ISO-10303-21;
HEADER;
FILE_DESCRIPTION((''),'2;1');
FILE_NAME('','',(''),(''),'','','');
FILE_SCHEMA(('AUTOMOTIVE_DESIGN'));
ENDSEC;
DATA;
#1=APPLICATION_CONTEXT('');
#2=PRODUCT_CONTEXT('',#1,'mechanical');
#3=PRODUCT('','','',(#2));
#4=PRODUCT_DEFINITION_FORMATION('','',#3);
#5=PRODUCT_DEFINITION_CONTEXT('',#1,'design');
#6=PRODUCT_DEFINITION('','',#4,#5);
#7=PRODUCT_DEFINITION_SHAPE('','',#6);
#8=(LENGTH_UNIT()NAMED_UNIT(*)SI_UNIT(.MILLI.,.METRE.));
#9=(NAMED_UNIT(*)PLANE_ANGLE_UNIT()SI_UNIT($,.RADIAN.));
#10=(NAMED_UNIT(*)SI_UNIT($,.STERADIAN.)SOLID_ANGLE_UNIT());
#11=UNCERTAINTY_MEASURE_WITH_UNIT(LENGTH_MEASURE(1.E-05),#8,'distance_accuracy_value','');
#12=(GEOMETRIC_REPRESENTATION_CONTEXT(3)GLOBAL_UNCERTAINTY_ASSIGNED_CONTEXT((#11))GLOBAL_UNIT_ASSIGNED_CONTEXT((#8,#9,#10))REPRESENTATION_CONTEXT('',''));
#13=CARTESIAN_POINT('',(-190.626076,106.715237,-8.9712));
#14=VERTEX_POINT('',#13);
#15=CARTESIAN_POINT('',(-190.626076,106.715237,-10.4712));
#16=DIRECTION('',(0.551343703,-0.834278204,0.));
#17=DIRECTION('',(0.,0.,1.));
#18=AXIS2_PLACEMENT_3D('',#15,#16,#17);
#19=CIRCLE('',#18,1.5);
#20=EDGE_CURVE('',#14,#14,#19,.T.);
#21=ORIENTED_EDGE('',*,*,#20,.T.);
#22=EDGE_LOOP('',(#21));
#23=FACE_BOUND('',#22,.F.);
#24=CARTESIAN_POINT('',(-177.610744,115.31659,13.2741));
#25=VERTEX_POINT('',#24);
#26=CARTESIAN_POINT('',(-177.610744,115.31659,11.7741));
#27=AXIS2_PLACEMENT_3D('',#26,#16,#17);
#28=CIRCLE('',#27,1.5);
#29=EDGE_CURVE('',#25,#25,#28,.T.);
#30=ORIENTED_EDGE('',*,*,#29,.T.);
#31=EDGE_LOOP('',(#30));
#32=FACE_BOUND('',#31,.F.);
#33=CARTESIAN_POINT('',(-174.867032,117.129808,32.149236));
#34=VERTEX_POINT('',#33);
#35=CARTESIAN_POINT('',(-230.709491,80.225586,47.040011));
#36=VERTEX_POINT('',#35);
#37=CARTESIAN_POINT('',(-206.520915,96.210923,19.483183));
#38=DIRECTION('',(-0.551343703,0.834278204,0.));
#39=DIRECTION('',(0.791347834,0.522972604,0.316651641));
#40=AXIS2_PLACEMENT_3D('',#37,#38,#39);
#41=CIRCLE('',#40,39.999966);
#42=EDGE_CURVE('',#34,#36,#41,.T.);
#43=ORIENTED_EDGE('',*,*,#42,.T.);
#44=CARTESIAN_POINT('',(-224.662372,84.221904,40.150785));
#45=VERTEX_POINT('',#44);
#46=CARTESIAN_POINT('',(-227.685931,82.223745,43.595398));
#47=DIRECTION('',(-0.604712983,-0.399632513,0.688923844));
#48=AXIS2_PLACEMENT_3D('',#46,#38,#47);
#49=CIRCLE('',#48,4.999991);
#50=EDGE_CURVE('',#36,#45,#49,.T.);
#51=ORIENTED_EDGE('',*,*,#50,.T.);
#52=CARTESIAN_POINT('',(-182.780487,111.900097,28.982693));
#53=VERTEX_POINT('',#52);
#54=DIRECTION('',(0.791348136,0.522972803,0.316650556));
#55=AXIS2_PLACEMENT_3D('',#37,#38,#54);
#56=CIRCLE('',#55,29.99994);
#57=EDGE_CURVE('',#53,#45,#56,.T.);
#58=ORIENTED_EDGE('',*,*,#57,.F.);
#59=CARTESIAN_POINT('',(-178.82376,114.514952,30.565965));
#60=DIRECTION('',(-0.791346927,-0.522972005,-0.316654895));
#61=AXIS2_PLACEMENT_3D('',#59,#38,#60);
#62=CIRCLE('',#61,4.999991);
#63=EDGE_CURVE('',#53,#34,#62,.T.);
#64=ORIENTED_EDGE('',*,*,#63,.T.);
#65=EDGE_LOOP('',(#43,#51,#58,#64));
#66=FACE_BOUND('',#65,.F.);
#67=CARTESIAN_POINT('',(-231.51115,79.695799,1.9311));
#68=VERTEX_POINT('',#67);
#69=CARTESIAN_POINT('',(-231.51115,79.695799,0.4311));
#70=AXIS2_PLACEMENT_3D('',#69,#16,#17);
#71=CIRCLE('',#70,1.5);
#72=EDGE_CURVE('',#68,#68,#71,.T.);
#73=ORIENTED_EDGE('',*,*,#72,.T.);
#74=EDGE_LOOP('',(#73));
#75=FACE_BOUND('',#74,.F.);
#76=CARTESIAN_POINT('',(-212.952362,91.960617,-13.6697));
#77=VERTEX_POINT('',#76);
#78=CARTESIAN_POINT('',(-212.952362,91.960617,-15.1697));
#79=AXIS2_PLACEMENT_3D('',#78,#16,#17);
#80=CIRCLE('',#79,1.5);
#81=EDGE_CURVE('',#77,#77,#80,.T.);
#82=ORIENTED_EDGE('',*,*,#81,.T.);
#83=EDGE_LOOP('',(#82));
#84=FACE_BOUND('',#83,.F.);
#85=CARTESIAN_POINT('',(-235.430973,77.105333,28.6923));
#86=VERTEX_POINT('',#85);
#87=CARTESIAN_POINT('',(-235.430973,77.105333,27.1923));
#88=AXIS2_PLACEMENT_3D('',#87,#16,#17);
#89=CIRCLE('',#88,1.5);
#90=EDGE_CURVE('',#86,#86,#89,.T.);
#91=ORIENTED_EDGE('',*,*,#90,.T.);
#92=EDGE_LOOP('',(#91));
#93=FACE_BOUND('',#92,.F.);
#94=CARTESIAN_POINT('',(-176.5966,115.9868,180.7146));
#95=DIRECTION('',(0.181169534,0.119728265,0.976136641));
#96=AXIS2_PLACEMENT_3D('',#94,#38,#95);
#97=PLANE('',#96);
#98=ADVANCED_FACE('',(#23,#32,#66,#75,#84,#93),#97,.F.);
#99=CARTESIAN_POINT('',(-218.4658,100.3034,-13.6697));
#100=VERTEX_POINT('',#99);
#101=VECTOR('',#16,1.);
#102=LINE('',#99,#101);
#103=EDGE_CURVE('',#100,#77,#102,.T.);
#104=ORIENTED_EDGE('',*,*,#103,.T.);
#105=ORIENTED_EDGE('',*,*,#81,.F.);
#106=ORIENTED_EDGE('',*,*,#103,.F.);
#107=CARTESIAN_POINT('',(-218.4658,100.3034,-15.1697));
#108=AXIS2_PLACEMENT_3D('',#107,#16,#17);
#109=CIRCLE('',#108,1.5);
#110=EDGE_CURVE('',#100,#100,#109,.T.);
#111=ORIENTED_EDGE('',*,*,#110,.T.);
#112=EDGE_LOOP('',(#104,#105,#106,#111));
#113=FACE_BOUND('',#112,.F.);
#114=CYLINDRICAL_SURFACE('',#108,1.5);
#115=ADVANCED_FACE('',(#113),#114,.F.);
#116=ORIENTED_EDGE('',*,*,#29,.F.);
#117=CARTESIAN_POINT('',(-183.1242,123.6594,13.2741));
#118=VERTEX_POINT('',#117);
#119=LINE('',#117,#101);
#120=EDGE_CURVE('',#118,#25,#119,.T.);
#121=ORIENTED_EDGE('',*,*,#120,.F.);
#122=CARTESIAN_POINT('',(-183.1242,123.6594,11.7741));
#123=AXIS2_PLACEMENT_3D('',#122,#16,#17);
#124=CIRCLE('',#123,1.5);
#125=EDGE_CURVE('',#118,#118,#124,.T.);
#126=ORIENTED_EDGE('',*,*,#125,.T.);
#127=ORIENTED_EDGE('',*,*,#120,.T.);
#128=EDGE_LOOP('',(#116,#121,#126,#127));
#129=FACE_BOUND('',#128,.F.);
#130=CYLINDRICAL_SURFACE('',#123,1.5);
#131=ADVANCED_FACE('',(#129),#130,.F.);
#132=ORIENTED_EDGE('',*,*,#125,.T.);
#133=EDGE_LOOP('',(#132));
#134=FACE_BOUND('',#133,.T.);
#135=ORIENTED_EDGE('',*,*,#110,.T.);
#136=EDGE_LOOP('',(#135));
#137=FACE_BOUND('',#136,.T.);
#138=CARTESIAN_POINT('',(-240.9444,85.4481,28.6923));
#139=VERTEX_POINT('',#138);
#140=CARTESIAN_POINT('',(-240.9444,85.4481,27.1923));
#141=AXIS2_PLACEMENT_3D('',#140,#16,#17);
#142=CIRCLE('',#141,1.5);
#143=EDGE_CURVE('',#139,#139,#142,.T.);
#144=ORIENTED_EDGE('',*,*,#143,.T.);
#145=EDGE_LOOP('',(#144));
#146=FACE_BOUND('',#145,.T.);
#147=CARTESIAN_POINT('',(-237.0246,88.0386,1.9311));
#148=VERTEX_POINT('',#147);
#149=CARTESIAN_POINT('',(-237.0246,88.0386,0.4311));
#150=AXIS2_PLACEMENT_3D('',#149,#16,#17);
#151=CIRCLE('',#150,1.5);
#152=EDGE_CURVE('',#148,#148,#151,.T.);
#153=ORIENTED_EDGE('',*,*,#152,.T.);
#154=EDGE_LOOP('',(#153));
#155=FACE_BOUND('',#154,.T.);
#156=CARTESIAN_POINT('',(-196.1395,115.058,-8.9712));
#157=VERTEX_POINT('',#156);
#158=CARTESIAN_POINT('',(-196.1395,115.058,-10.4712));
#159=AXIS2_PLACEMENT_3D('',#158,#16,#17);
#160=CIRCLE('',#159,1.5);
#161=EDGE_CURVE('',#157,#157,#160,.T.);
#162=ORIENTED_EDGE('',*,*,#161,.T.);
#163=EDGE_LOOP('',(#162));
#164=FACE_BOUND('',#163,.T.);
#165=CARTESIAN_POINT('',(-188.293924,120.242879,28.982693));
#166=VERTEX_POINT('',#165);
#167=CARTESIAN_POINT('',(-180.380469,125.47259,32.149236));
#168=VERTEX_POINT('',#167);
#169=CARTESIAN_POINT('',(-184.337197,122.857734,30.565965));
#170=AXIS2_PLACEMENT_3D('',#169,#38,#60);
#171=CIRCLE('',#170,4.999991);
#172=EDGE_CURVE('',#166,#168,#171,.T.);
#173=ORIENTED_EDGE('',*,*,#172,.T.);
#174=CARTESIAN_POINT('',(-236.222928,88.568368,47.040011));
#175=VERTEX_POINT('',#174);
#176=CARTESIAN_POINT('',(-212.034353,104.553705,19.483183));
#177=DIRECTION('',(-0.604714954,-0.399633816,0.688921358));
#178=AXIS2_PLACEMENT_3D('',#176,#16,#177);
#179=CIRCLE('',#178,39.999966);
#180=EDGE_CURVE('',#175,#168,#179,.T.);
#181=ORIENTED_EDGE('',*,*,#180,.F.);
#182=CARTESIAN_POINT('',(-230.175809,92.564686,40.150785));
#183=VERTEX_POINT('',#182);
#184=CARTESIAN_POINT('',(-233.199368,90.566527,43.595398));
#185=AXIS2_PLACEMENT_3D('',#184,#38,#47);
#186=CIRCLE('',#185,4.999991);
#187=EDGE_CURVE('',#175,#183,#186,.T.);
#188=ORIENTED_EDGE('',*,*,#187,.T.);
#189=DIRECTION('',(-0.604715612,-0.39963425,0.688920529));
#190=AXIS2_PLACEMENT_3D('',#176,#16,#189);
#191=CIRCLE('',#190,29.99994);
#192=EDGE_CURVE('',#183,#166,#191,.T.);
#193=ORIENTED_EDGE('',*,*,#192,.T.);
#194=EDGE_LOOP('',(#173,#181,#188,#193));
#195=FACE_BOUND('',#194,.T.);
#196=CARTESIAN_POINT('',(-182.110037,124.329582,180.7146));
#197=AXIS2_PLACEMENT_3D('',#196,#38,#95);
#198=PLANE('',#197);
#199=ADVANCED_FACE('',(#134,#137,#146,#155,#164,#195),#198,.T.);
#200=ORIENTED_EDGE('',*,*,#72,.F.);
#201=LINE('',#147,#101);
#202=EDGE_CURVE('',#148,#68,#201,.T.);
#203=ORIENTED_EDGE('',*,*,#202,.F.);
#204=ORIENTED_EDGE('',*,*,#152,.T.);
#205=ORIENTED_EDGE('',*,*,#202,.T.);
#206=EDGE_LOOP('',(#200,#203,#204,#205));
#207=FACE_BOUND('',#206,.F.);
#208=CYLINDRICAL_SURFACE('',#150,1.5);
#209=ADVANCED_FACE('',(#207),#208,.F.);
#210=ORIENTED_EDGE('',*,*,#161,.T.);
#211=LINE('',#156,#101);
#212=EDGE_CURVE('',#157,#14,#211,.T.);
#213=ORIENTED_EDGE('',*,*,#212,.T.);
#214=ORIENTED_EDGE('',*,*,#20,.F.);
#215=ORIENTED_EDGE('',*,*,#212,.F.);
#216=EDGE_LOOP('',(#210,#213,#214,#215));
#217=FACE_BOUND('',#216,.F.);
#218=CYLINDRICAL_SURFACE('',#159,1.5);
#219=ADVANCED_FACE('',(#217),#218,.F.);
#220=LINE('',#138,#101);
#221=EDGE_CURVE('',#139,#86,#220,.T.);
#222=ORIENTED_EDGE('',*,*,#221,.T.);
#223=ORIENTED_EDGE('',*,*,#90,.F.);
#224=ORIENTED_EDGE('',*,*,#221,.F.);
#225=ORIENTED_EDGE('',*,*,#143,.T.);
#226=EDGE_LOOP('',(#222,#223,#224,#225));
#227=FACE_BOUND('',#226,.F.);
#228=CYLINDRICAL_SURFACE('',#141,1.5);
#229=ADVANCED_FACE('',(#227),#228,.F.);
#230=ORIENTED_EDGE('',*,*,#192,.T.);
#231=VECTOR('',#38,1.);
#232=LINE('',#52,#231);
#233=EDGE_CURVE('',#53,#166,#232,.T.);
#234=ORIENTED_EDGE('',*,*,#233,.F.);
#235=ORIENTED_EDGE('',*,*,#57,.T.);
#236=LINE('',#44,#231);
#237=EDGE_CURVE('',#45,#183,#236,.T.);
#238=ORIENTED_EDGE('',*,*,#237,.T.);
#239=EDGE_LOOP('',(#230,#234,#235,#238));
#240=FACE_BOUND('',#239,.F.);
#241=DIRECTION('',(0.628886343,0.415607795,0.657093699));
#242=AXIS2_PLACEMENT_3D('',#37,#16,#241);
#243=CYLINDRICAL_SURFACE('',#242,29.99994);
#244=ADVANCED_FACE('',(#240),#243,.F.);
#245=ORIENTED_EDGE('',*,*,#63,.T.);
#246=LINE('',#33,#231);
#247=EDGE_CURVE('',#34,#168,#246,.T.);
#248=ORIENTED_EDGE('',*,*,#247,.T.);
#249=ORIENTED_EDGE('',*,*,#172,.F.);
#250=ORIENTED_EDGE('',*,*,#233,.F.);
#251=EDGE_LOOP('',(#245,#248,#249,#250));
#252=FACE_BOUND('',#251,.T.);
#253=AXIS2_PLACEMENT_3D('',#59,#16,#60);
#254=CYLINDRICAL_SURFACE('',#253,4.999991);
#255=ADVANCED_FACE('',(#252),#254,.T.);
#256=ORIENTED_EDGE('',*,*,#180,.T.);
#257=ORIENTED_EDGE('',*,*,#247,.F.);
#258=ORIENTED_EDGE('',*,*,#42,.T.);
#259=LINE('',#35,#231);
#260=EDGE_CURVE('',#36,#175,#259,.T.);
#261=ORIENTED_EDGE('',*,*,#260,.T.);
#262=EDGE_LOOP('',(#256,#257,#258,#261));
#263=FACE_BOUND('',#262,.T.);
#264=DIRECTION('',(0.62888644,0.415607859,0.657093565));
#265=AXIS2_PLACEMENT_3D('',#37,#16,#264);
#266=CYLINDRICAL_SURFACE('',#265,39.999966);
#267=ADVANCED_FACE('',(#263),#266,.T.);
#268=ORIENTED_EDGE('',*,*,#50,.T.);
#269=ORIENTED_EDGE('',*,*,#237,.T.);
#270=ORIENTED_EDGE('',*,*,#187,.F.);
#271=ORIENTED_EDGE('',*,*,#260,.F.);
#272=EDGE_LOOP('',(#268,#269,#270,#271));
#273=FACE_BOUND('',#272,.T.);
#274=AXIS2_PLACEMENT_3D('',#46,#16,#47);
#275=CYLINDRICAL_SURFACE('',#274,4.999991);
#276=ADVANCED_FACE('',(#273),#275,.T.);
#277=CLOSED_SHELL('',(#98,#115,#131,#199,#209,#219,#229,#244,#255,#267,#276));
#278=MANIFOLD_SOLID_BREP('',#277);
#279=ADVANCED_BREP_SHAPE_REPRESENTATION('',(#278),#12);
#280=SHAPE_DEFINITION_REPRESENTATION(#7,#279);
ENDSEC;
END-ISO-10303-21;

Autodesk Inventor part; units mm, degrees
ref_plane "Work Plane1" through (-147.3677, -4.0754, 130.4495) normal (-0.5513437, 0.8342782, 0) x (0, 0, 1)
ref_plane "Work Plane2" through (-176.5966, 115.9868, 180.7146) normal (-0.5513437, 0.8342782, 0) x (0.1811695, 0.1197283, 0.9761366)
sketch "Sketch2" plane through (-176.5966, 115.9868, 180.7146) normal (-0.5513437, 0.8342782, 0) x (0.1811695, 0.1197283, 0.9761366)
  arc A0 (82.4936, -40) -> (107.4936, -33.3012) centre (82.4936, 10) ccw projected
  line L0 (107.4936, -33.3012) -> (126.4432, -22.3607) projected
  arc A1 (132.9687, -23.7251) -> (126.4432, -22.3607) centre (128.9432, -26.6908) ccw projected
  arc A2 (132.9687, -23.7251) -> (132.9687, 23.7251) centre (165.173, 0) ccw projected
  arc A3 (126.4432, 22.3607) -> (132.9687, 23.7251) centre (128.9432, 26.6908) ccw projected
  line L1 (126.4432, 22.3607) -> (107.4936, 33.3012) projected
  arc A4 (107.4936, 33.3012) -> (82.4936, 40) centre (82.4936, -10) ccw projected
  line L2 (-82.4936, 40) -> (82.4936, 40) projected
  arc A5 (-82.4936, 40) -> (-107.4936, 33.3012) centre (-82.4936, -10) ccw projected
  line L3 (-107.4936, 33.3012) -> (-126.4432, 22.3607) projected
  arc A6 (-132.9687, 23.7251) -> (-126.4432, 22.3607) centre (-128.9432, 26.6908) ccw projected
  arc A7 (-132.9687, 23.7251) -> (-132.9687, -23.7251) centre (-165.173, 0) ccw projected
  arc A8 (-126.4432, -22.3607) -> (-132.9687, -23.7251) centre (-128.9432, -26.6908) ccw projected
  line L4 (-126.4432, -22.3607) -> (-107.4936, -33.3012) projected
  arc A9 (-107.4936, -33.3012) -> (-82.4936, -40) centre (-82.4936, 10) ccw projected
  line L5 (82.4936, -40) -> (-82.4936, -40) projected
  arc A10 (3.6764, 4.0958) -> (3.6764, -4.0958) centre (6.5442, 0) ccw projected
  line L6 (3.6764, -4.0958) -> (20.5406, -15.9042) projected
  arc A11 (17.6727, -25) -> (20.5406, -15.9042) centre (17.6727, -20) ccw projected
  line L7 (17.6727, -25) -> (-19.8928, -25) projected
  arc A12 (-22.7607, -24.0958) -> (-19.8928, -25) centre (-19.8928, -20) ccw projected
  line L8 (-22.7607, -24.0958) -> (-51.3236, -4.0958) projected
  arc A13 (-51.3236, 4.0958) -> (-51.3236, -4.0958) centre (-48.4558, 0) ccw projected
  line L9 (-51.3236, 4.0958) -> (-22.7607, 24.0958) projected
  arc A14 (-19.8928, 25) -> (-22.7607, 24.0958) centre (-19.8928, 20) ccw projected
  line L10 (-19.8928, 25) -> (17.6727, 25) projected
  arc A15 (20.5406, 15.9042) -> (17.6727, 25) centre (17.6727, 20) ccw projected
  line L11 (20.5406, 15.9042) -> (3.6764, 4.0958) projected
  line L12 (-50.2924, 21.3617) -> (-62.1293, 13.0734) projected
  arc A16 (-64.2764, 12.9796) -> (-62.1293, 13.0734) centre (-63.2764, 14.7117) ccw projected
  line L13 (-64.2764, 12.9796) -> (-78.6322, 21.2679) projected
  arc A17 (-77.6322, 25) -> (-78.6322, 21.2679) centre (-77.6322, 23) ccw projected
  line L14 (-77.6322, 25) -> (-51.4395, 25) projected
  arc A18 (-50.2924, 21.3617) -> (-51.4395, 25) centre (-51.4395, 23) ccw projected
  line L15 (-62.1293, -13.0734) -> (-50.2924, -21.3617) projected
  arc A19 (-51.4395, -25) -> (-50.2924, -21.3617) centre (-51.4395, -23) ccw projected
  line L16 (-51.4395, -25) -> (-77.6322, -25) projected
  arc A20 (-78.6322, -21.2679) -> (-77.6322, -25) centre (-77.6322, -23) ccw projected
  line L17 (-78.6322, -21.2679) -> (-64.2764, -12.9796) projected
  arc A21 (-62.1293, -13.0734) -> (-64.2764, -12.9796) centre (-63.2764, -14.7117) ccw projected
  line L18 (-102.673, -23.5566) -> (-119.3236, -13.9434) projected
  arc A22 (-121.8236, -9.6132) -> (-119.3236, -13.9434) centre (-116.8236, -9.6132) ccw projected
  line L19 (-121.8236, -9.6132) -> (-121.8236, 9.6132) projected
  arc A23 (-119.3236, 13.9434) -> (-121.8236, 9.6132) centre (-116.8236, 9.6132) ccw projected
  line L20 (-119.3236, 13.9434) -> (-102.673, 23.5566) projected
  arc A24 (-97.673, 23.5566) -> (-102.673, 23.5566) centre (-100.173, 19.2265) ccw projected
  line L21 (-97.673, 23.5566) -> (-81.0224, 13.9434) projected
  arc A25 (-78.5224, 9.6132) -> (-81.0224, 13.9434) centre (-83.5224, 9.6132) ccw projected
  line L22 (-78.5224, 9.6132) -> (-78.5224, -9.6132) projected
  arc A26 (-81.0224, -13.9434) -> (-78.5224, -9.6132) centre (-83.5224, -9.6132) ccw projected
  line L23 (-81.0224, -13.9434) -> (-97.673, -23.5566) projected
  arc A27 (-102.673, -23.5566) -> (-97.673, -23.5566) centre (-100.173, -19.2265) ccw projected
  line L24 (72.827, -25) -> (57.1072, -25) projected
  arc A28 (54.2393, -24.0958) -> (57.1072, -25) centre (57.1072, -20) ccw projected
  line L25 (54.2393, -24.0958) -> (25.6764, -4.0958) projected
  arc A29 (25.6764, 4.0958) -> (25.6764, -4.0958) centre (28.5442, 0) ccw projected
  line L26 (25.6764, 4.0958) -> (54.2393, 24.0958) projected
  arc A30 (57.1072, 25) -> (54.2393, 24.0958) centre (57.1072, 20) ccw projected
  line L27 (57.1072, 25) -> (72.827, 25) projected
  arc A31 (77.827, 20) -> (72.827, 25) centre (72.827, 20) ccw projected
  line L28 (77.827, 20) -> (77.827, -20) projected
  arc A32 (72.827, -25) -> (77.827, -20) centre (72.827, -20) ccw projected
  circle A33 centre (-165.173, 0) radius 11 projected
  circle A34 centre (105.173, 0) radius 8 projected
  line L29 (87.4451, -10.7279) -> (97.4451, -10.7279) projected
  arc A35 (97.4451, -14.7279) -> (97.4451, -10.7279) centre (97.4451, -12.7279) ccw projected
  line L30 (97.4451, -14.7279) -> (87.4451, -14.7279) projected
  arc A36 (87.4451, -10.7279) -> (87.4451, -14.7279) centre (87.4451, -12.7279) ccw projected
  line L31 (122.9009, -14.7279) -> (112.9009, -14.7279) projected
  arc A37 (112.9009, -10.7279) -> (112.9009, -14.7279) centre (112.9009, -12.7279) ccw projected
  line L32 (112.9009, -10.7279) -> (122.9009, -10.7279) projected
  arc A38 (122.9009, -14.7279) -> (122.9009, -10.7279) centre (122.9009, -12.7279) ccw projected
  line L33 (97.4451, 10.7279) -> (87.4451, 10.7279) projected
  arc A39 (87.4451, 14.7279) -> (87.4451, 10.7279) centre (87.4451, 12.7279) ccw projected
  line L34 (87.4451, 14.7279) -> (97.4451, 14.7279) projected
  arc A40 (97.4451, 10.7279) -> (97.4451, 14.7279) centre (97.4451, 12.7279) ccw projected
  line L35 (122.9009, 10.7279) -> (112.9009, 10.7279) projected
  arc A41 (112.9009, 14.7279) -> (112.9009, 10.7279) centre (112.9009, 12.7279) ccw projected
  line L36 (112.9009, 14.7279) -> (122.9009, 14.7279) projected
  arc A42 (122.9009, 10.7279) -> (122.9009, 14.7279) centre (122.9009, 12.7279) ccw projected
  line L37 (169.046, 1) -> (169.973, 1) projected
  line L38 (169.973, 1) -> (169.973, -1) projected
  line L39 (169.973, -1) -> (169.046, -1) projected
  arc A43 (169.046, 1) -> (169.046, -1) centre (165.173, 0) ccw projected
  circle A44 centre (158.2448, -4) radius 2 projected
  circle A45 centre (172.1012, -4) radius 2 projected
  circle A46 centre (165.173, 8) radius 2 projected
  circle A47 centre (145.374, -19.799) radius 1.6 projected
  circle A48 centre (165.173, -28) radius 1.6 projected
  circle A49 centre (184.972, -19.799) radius 1.6 projected
  circle A50 centre (193.173, 0) radius 1.6 projected
  circle A51 centre (184.972, 19.799) radius 1.6 projected
  circle A52 centre (165.173, 28) radius 1.6 projected
  circle A53 centre (145.374, 19.799) radius 1.6 projected
  circle A54 centre (137.173, 0) radius 1.6 projected
  circle A55 centre (-165.173, -16.0004) radius 1.55 projected
  circle A56 centre (-149.1726, 0) radius 1.55 projected
  circle A57 centre (-165.173, 16.0004) radius 1.55 projected
  circle A58 centre (-181.1734, 0) radius 1.55 projected
  arc A59 (-141.0198, 17.7938) -> (-141.0198, -17.7938) centre (-165.173, 0) ccw
  arc A60 (-141.0198, 17.7938) -> (-121.4432, 13.7004) centre (-128.9432, 26.6908) ccw
  line L40 (-121.4432, 13.7004) -> (-102.4936, 24.641)
  arc A61 (-82.4936, 30) -> (-102.4936, 24.641) centre (-82.4936, -10) ccw
  line L41 (-82.4936, 30) -> (82.4936, 30)
  arc A62 (102.4936, 24.641) -> (82.4936, 30) centre (82.4936, -10) ccw
  line L42 (102.4936, 24.641) -> (121.4432, 13.7004)
  arc A63 (121.4432, 13.7004) -> (141.0198, 17.7938) centre (128.9432, 26.6908) ccw
  arc A64 (141.0198, -17.7938) -> (141.0198, 17.7938) centre (165.173, 0) ccw
  arc A65 (141.0198, -17.7938) -> (121.4432, -13.7004) centre (128.9432, -26.6908) ccw
  line L43 (121.4432, -13.7004) -> (102.4936, -24.641)
  arc A66 (82.4936, -30) -> (102.4936, -24.641) centre (82.4936, 10) ccw
  line L44 (82.4936, -30) -> (-82.4936, -30)
  arc A67 (-102.4936, -24.641) -> (-82.4936, -30) centre (-82.4936, 10) ccw
  line L45 (-102.4936, -24.641) -> (-121.4432, -13.7004)
  arc A68 (-121.4432, -13.7004) -> (-141.0198, -17.7938) centre (-128.9432, -26.6908) ccw
  arc A69 (-144.5699, -34.2857) -> (-149.7207, -25.7143) centre (-147.1453, -30) ccw
  line L46 (-205.173, 0) -> (-195.173, 0)
  arc A70 (-149.7207, 25.7143) -> (-144.5699, 34.2857) centre (-147.1453, 30) ccw
  point P0 (-158.2951, 120.6357)
  point P1 (-149.7207, 25.7143)
  point P2 (-144.5699, 34.2857)
  dimension "d4" = 10
  dimension "d5" = 30
extrude "Extrusion2" add sketch "Sketch2" along normal blind 10 contours A7 L46 A59 A69 | A7 A70 A59 L46
ref_plane "Work Plane3" through (-213.7676, 91.4218, -19.5622) normal (0.8143695, 0.5381868, -0.2171572) x (0.1811695, 0.1197283, 0.9761366)
sketch "Sketch3" plane through (-182.11, 124.3296, 180.7146) normal (-0.5513437, 0.8342782, 0) x (0.8143695, 0.5381868, -0.2171572)
  circle A0 centre (0, 200.673) radius 3.75 projected
  circle A1 centre (35.5, 165.173) radius 3.75 projected
  circle A2 centre (0, 129.673) radius 3.75 projected
  circle A3 centre (-35.5, 165.173) radius 3.75 projected
  circle A4 centre (-25.1023, 140.0707) radius 3.75 projected
  circle A5 centre (25.1023, 140.0707) radius 3.75 projected
  circle A6 centre (25.1023, 190.2753) radius 3.75 projected
  circle A7 centre (-25.1023, 190.2753) radius 3.75 projected
  circle A8 centre (0, 165.173) radius 40 projected
  circle A9 centre (0, 165.173) radius 30.089 projected
  point P0 (120.6357, 158.2951)
hole "Hole1" at (-218.4658, 100.3034, -15.1697) at (-196.1395, 115.058, -10.4712) at (-183.1242, 123.6594, 11.7741) at (-187.044, 121.0689, 38.5353) at (-205.6028, 108.8041, 54.136) at (-227.9291, 94.0495, 49.4376) at (-240.9444, 85.4481, 27.1923) at (-237.0246, 88.0386, 0.4311) direction (0.5513437, -0.8342782, 0) diameter 3 end through all
properties part number "spacer"
